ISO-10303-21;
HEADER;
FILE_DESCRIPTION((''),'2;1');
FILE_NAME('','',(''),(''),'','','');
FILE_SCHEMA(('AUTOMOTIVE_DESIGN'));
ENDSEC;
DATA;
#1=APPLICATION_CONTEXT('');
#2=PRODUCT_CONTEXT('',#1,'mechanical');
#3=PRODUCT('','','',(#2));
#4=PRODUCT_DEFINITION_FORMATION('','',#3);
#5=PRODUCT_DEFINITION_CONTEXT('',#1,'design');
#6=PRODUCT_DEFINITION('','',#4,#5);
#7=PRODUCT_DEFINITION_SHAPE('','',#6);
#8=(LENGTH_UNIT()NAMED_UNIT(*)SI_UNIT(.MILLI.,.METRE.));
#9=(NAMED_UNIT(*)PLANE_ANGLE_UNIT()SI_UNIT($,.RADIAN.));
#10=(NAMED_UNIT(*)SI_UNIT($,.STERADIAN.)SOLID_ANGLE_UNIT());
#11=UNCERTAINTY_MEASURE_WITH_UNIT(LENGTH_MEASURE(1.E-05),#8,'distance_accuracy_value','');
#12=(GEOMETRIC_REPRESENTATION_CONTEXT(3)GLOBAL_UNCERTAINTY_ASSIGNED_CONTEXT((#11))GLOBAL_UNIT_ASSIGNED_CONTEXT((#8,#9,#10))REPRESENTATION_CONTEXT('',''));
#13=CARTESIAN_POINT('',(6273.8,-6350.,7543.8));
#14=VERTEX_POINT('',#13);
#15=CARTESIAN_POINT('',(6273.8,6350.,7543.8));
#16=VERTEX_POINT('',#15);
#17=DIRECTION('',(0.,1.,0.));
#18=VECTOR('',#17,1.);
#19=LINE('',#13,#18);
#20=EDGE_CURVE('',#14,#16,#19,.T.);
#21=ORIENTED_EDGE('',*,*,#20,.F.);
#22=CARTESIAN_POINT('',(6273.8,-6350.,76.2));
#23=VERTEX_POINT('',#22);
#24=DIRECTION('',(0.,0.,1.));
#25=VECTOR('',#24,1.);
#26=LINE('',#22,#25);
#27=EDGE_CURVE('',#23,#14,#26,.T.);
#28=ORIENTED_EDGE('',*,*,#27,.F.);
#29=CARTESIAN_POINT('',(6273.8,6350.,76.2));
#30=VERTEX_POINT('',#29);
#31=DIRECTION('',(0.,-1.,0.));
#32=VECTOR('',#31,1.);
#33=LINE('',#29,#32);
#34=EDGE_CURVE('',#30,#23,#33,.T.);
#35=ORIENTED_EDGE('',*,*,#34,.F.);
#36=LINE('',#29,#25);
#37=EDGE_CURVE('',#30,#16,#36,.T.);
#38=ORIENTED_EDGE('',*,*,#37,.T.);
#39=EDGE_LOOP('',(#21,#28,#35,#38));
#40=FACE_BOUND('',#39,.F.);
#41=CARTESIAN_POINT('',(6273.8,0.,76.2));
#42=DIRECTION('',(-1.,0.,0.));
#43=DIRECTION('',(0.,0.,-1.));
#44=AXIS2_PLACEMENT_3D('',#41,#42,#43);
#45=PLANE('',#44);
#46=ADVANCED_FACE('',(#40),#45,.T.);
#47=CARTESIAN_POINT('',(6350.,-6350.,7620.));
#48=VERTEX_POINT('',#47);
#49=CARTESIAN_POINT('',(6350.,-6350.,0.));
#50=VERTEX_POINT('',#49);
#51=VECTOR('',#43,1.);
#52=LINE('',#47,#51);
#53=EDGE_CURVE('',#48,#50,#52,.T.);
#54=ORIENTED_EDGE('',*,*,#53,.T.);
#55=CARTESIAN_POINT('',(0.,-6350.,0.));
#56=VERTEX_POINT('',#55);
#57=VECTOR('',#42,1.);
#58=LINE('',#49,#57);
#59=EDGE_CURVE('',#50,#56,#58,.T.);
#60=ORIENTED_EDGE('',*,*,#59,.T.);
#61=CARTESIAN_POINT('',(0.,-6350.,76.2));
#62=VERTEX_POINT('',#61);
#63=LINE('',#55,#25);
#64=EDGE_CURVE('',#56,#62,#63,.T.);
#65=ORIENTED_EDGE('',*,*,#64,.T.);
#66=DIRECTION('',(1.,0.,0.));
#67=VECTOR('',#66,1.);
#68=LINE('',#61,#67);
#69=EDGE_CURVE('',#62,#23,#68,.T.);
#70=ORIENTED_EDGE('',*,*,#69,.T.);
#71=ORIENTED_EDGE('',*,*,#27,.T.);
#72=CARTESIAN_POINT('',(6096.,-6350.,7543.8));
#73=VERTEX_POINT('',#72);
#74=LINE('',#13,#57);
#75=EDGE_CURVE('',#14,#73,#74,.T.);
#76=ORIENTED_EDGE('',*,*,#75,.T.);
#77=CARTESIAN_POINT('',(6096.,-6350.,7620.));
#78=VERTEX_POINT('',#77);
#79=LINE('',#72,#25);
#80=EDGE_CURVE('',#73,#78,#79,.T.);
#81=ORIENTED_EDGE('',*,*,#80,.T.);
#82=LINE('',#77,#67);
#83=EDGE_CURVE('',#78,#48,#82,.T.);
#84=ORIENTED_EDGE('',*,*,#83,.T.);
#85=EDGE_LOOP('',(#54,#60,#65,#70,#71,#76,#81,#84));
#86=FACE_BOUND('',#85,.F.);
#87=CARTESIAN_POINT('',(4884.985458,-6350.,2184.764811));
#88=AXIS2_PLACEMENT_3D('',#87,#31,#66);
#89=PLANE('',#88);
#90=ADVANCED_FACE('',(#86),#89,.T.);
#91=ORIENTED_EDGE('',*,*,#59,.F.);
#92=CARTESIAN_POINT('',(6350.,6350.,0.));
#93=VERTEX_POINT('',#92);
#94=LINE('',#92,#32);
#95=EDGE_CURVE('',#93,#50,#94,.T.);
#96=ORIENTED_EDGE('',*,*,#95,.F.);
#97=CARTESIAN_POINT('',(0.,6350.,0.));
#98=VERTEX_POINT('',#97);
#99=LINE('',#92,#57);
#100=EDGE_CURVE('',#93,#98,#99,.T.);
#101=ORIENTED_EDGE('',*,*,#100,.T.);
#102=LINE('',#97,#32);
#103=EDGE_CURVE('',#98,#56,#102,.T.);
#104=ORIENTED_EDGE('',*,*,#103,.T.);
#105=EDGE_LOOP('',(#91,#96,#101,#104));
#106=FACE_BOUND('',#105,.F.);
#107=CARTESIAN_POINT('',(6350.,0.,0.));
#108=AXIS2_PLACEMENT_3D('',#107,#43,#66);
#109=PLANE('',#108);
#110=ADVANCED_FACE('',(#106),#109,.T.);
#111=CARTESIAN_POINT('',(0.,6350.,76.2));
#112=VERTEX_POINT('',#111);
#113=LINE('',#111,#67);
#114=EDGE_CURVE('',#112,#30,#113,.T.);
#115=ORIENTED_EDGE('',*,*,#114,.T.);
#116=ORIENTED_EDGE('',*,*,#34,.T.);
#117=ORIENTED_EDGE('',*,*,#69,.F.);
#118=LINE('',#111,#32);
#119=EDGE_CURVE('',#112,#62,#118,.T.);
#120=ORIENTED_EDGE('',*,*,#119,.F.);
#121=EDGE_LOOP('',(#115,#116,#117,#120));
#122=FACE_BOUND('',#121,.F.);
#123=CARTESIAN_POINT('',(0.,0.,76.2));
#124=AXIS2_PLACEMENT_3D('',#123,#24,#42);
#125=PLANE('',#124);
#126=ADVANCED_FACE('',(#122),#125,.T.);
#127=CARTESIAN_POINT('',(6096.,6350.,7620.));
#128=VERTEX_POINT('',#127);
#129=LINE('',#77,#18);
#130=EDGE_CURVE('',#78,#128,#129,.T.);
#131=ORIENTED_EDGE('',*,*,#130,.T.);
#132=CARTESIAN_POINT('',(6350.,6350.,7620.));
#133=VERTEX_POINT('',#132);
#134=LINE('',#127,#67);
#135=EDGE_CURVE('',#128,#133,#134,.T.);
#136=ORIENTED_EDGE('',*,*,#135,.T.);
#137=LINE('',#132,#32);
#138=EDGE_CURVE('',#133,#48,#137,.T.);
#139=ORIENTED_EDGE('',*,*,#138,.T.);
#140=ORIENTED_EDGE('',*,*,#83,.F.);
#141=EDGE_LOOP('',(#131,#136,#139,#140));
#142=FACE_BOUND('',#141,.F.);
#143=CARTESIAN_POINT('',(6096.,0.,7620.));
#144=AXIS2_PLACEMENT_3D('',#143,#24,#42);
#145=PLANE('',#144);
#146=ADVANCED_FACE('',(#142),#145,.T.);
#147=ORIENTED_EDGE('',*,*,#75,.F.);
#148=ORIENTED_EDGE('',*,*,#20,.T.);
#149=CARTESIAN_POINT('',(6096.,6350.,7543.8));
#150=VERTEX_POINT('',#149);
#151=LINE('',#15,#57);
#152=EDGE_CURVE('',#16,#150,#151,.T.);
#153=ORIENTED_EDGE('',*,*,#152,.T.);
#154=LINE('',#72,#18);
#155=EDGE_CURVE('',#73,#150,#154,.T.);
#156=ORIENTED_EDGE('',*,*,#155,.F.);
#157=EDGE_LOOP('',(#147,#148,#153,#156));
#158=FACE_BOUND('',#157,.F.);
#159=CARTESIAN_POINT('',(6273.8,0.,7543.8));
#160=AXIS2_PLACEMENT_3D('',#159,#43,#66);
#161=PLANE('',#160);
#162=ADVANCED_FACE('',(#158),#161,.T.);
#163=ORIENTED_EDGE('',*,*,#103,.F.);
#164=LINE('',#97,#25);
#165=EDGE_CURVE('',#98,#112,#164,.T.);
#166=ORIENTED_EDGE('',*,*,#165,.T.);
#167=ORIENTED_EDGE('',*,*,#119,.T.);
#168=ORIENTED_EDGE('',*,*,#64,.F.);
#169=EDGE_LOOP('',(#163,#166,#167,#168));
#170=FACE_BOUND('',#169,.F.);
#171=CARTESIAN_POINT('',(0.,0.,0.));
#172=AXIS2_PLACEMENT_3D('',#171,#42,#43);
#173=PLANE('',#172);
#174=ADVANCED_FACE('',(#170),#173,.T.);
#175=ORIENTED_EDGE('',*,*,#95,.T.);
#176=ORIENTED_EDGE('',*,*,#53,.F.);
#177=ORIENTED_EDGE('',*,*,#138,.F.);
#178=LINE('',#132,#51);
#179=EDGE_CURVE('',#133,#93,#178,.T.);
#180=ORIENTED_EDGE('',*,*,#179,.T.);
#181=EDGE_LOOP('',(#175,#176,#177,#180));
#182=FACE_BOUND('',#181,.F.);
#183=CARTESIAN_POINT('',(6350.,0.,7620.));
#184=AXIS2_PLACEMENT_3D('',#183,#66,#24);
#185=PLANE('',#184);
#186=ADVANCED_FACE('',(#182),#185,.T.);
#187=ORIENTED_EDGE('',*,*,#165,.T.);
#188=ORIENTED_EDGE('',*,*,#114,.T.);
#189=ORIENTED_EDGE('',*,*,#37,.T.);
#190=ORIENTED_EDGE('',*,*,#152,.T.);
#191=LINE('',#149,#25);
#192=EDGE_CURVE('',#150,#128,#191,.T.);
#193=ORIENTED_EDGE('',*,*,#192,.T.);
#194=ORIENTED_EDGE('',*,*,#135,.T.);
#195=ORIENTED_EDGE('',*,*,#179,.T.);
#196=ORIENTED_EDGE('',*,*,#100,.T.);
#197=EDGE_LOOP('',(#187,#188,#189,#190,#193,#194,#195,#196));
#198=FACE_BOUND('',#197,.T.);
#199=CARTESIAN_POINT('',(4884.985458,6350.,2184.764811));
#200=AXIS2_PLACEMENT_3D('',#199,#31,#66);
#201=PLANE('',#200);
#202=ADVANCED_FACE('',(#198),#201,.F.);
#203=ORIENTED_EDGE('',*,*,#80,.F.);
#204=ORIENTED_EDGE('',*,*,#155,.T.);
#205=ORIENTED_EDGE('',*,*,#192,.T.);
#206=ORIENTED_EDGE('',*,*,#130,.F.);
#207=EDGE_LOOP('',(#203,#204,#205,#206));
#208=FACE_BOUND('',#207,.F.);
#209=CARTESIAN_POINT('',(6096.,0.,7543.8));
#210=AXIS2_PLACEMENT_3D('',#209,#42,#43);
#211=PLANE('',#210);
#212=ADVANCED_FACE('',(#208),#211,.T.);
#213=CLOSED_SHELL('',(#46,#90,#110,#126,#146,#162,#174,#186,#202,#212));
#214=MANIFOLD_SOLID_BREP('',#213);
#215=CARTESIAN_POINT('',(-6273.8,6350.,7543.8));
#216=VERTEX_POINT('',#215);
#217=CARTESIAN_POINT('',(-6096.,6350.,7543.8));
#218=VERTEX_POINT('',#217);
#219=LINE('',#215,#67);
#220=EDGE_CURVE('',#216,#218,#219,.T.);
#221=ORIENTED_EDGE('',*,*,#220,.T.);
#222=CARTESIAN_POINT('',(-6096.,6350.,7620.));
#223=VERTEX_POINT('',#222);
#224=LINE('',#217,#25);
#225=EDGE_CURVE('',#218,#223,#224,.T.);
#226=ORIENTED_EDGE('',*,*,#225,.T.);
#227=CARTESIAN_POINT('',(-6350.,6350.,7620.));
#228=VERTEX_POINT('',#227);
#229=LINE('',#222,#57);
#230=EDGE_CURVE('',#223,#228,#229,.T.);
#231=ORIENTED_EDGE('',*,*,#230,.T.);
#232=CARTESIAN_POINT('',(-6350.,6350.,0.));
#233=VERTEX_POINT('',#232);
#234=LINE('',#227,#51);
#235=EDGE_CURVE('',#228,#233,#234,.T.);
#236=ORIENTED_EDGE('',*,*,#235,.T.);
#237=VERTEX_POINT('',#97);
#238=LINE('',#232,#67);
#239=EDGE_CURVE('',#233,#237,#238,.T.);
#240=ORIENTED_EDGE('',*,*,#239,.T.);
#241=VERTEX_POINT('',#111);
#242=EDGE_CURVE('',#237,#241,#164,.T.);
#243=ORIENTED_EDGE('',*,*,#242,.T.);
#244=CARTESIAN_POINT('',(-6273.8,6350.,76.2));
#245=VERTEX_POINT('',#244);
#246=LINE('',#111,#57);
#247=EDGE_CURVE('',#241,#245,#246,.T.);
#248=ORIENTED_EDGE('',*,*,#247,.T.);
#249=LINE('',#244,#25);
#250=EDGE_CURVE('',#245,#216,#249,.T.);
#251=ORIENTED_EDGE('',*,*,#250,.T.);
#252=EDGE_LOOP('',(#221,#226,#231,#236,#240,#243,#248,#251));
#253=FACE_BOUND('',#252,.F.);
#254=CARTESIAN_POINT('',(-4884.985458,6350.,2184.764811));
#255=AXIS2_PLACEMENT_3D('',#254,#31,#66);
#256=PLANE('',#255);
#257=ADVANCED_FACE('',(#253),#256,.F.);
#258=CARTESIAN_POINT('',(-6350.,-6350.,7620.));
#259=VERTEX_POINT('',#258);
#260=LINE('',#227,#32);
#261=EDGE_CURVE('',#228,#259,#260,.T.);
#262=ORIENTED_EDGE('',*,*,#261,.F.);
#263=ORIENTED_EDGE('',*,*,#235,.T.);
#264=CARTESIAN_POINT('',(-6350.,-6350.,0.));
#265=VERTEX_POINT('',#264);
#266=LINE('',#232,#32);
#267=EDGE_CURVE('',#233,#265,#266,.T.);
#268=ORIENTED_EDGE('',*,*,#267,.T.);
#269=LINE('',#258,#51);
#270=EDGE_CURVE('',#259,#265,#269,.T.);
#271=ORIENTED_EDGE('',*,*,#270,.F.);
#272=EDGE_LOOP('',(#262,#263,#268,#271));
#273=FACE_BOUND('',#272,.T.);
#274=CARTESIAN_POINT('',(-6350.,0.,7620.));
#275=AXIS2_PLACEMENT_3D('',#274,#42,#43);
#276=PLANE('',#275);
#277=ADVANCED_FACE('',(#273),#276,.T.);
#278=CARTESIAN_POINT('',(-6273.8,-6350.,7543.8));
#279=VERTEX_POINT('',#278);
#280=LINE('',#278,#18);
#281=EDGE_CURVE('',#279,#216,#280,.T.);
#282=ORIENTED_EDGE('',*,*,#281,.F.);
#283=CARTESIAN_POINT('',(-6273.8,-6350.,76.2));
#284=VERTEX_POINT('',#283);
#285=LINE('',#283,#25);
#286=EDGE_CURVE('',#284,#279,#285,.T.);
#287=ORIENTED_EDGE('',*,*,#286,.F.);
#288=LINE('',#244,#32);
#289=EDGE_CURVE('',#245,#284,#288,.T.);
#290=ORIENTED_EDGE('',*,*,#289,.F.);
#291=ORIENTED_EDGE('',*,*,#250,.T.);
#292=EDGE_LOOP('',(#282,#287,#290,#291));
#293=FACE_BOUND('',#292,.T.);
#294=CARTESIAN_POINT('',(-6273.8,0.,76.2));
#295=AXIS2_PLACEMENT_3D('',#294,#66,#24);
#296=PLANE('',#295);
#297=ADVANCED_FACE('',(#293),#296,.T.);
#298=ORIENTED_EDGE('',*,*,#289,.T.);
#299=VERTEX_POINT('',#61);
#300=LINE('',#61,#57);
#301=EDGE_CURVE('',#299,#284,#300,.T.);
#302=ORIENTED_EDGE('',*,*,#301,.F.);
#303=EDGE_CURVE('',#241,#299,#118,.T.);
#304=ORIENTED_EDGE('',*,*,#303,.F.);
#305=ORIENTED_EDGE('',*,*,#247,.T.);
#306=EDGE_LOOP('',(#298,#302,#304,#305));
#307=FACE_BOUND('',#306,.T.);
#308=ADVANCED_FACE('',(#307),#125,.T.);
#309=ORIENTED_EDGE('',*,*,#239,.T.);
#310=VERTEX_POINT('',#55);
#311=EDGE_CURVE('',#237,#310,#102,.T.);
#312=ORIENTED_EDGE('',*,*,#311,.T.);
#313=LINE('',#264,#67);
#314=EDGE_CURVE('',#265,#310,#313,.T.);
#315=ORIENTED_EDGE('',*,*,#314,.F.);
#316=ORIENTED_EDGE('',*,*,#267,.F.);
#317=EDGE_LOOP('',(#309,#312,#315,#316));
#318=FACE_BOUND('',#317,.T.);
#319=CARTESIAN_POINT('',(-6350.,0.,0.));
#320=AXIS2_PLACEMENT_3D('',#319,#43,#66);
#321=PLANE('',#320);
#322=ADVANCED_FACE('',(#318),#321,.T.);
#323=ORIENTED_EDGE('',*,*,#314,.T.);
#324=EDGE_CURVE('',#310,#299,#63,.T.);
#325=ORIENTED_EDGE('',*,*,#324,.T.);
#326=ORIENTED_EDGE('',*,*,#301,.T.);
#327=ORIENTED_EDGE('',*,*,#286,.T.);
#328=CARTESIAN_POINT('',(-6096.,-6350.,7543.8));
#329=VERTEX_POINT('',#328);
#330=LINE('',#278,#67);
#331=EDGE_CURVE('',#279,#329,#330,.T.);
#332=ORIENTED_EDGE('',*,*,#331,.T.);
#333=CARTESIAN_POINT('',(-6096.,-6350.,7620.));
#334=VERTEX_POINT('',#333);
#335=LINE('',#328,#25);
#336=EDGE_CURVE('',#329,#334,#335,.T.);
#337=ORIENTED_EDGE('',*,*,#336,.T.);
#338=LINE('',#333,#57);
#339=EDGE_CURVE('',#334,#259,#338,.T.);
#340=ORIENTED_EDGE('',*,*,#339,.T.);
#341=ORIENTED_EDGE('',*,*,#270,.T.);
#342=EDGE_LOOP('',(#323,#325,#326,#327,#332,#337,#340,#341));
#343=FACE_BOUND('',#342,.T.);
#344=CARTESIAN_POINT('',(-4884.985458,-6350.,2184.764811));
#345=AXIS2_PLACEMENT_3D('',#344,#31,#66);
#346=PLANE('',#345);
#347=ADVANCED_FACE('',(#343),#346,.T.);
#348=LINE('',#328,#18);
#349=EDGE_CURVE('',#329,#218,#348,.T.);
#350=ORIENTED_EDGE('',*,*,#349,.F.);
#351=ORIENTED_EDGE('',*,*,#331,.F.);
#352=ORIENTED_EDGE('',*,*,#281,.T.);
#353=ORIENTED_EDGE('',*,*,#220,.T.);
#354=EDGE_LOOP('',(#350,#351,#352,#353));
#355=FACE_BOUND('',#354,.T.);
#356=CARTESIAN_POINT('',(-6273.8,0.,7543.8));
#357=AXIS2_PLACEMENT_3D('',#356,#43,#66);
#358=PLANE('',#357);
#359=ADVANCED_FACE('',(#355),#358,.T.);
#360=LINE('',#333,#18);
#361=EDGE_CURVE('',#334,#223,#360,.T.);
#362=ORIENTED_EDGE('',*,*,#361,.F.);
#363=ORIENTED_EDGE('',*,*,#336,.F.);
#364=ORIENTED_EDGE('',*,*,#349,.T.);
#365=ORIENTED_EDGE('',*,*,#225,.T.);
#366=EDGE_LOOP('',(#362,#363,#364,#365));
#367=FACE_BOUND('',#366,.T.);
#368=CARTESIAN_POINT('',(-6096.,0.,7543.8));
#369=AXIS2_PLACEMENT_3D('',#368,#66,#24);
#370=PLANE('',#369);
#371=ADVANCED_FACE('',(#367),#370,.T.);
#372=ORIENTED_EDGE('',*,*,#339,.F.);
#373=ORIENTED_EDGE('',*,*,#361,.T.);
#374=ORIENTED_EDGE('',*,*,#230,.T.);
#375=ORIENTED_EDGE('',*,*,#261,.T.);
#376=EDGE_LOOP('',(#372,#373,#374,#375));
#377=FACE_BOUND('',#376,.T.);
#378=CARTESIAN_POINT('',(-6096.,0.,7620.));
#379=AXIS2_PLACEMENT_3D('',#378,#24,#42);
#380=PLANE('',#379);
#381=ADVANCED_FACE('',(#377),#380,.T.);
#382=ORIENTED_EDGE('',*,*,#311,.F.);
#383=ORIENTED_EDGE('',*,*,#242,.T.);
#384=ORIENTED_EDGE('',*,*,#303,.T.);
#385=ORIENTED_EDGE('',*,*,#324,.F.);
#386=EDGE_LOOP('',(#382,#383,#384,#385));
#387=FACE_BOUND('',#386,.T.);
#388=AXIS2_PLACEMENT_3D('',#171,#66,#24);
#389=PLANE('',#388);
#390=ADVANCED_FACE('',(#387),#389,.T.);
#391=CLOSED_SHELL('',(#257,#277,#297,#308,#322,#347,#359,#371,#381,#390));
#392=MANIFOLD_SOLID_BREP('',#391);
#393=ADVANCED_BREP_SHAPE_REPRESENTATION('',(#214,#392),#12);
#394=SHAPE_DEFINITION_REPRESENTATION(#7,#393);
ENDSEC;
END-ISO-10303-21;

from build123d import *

# Parameters (mm, degrees)
F1_DEPTH = 6350


# Not quite as in the source:
# - a pattern or mirror of a feature is missing from the dataset's text; its kind, count and spacing are read off the source's solid


with BuildPart() as f1:
    # F0 (on Front) → F1 (new body, symmetric)
    with BuildSketch(Plane.XZ):
        Polygon((-6096, 7620), (-6350, 7620), (-6350, 0), (0, 0), (0, 76.2), (-6273.8, 76.2), (-6273.8, 7543.8), (-6096, 7543.8), align=None)
    extrude(amount=F1_DEPTH, both=True)


with BuildPart() as f1_copies_1:
    # F1_copies: instance of F1
    add(f1.part.mirror(Plane(origin=(0, 0, 0), x_dir=(0, 0, 1), z_dir=(1, 0, 0))))


solid = Compound([f1.part, f1_copies_1.part])
